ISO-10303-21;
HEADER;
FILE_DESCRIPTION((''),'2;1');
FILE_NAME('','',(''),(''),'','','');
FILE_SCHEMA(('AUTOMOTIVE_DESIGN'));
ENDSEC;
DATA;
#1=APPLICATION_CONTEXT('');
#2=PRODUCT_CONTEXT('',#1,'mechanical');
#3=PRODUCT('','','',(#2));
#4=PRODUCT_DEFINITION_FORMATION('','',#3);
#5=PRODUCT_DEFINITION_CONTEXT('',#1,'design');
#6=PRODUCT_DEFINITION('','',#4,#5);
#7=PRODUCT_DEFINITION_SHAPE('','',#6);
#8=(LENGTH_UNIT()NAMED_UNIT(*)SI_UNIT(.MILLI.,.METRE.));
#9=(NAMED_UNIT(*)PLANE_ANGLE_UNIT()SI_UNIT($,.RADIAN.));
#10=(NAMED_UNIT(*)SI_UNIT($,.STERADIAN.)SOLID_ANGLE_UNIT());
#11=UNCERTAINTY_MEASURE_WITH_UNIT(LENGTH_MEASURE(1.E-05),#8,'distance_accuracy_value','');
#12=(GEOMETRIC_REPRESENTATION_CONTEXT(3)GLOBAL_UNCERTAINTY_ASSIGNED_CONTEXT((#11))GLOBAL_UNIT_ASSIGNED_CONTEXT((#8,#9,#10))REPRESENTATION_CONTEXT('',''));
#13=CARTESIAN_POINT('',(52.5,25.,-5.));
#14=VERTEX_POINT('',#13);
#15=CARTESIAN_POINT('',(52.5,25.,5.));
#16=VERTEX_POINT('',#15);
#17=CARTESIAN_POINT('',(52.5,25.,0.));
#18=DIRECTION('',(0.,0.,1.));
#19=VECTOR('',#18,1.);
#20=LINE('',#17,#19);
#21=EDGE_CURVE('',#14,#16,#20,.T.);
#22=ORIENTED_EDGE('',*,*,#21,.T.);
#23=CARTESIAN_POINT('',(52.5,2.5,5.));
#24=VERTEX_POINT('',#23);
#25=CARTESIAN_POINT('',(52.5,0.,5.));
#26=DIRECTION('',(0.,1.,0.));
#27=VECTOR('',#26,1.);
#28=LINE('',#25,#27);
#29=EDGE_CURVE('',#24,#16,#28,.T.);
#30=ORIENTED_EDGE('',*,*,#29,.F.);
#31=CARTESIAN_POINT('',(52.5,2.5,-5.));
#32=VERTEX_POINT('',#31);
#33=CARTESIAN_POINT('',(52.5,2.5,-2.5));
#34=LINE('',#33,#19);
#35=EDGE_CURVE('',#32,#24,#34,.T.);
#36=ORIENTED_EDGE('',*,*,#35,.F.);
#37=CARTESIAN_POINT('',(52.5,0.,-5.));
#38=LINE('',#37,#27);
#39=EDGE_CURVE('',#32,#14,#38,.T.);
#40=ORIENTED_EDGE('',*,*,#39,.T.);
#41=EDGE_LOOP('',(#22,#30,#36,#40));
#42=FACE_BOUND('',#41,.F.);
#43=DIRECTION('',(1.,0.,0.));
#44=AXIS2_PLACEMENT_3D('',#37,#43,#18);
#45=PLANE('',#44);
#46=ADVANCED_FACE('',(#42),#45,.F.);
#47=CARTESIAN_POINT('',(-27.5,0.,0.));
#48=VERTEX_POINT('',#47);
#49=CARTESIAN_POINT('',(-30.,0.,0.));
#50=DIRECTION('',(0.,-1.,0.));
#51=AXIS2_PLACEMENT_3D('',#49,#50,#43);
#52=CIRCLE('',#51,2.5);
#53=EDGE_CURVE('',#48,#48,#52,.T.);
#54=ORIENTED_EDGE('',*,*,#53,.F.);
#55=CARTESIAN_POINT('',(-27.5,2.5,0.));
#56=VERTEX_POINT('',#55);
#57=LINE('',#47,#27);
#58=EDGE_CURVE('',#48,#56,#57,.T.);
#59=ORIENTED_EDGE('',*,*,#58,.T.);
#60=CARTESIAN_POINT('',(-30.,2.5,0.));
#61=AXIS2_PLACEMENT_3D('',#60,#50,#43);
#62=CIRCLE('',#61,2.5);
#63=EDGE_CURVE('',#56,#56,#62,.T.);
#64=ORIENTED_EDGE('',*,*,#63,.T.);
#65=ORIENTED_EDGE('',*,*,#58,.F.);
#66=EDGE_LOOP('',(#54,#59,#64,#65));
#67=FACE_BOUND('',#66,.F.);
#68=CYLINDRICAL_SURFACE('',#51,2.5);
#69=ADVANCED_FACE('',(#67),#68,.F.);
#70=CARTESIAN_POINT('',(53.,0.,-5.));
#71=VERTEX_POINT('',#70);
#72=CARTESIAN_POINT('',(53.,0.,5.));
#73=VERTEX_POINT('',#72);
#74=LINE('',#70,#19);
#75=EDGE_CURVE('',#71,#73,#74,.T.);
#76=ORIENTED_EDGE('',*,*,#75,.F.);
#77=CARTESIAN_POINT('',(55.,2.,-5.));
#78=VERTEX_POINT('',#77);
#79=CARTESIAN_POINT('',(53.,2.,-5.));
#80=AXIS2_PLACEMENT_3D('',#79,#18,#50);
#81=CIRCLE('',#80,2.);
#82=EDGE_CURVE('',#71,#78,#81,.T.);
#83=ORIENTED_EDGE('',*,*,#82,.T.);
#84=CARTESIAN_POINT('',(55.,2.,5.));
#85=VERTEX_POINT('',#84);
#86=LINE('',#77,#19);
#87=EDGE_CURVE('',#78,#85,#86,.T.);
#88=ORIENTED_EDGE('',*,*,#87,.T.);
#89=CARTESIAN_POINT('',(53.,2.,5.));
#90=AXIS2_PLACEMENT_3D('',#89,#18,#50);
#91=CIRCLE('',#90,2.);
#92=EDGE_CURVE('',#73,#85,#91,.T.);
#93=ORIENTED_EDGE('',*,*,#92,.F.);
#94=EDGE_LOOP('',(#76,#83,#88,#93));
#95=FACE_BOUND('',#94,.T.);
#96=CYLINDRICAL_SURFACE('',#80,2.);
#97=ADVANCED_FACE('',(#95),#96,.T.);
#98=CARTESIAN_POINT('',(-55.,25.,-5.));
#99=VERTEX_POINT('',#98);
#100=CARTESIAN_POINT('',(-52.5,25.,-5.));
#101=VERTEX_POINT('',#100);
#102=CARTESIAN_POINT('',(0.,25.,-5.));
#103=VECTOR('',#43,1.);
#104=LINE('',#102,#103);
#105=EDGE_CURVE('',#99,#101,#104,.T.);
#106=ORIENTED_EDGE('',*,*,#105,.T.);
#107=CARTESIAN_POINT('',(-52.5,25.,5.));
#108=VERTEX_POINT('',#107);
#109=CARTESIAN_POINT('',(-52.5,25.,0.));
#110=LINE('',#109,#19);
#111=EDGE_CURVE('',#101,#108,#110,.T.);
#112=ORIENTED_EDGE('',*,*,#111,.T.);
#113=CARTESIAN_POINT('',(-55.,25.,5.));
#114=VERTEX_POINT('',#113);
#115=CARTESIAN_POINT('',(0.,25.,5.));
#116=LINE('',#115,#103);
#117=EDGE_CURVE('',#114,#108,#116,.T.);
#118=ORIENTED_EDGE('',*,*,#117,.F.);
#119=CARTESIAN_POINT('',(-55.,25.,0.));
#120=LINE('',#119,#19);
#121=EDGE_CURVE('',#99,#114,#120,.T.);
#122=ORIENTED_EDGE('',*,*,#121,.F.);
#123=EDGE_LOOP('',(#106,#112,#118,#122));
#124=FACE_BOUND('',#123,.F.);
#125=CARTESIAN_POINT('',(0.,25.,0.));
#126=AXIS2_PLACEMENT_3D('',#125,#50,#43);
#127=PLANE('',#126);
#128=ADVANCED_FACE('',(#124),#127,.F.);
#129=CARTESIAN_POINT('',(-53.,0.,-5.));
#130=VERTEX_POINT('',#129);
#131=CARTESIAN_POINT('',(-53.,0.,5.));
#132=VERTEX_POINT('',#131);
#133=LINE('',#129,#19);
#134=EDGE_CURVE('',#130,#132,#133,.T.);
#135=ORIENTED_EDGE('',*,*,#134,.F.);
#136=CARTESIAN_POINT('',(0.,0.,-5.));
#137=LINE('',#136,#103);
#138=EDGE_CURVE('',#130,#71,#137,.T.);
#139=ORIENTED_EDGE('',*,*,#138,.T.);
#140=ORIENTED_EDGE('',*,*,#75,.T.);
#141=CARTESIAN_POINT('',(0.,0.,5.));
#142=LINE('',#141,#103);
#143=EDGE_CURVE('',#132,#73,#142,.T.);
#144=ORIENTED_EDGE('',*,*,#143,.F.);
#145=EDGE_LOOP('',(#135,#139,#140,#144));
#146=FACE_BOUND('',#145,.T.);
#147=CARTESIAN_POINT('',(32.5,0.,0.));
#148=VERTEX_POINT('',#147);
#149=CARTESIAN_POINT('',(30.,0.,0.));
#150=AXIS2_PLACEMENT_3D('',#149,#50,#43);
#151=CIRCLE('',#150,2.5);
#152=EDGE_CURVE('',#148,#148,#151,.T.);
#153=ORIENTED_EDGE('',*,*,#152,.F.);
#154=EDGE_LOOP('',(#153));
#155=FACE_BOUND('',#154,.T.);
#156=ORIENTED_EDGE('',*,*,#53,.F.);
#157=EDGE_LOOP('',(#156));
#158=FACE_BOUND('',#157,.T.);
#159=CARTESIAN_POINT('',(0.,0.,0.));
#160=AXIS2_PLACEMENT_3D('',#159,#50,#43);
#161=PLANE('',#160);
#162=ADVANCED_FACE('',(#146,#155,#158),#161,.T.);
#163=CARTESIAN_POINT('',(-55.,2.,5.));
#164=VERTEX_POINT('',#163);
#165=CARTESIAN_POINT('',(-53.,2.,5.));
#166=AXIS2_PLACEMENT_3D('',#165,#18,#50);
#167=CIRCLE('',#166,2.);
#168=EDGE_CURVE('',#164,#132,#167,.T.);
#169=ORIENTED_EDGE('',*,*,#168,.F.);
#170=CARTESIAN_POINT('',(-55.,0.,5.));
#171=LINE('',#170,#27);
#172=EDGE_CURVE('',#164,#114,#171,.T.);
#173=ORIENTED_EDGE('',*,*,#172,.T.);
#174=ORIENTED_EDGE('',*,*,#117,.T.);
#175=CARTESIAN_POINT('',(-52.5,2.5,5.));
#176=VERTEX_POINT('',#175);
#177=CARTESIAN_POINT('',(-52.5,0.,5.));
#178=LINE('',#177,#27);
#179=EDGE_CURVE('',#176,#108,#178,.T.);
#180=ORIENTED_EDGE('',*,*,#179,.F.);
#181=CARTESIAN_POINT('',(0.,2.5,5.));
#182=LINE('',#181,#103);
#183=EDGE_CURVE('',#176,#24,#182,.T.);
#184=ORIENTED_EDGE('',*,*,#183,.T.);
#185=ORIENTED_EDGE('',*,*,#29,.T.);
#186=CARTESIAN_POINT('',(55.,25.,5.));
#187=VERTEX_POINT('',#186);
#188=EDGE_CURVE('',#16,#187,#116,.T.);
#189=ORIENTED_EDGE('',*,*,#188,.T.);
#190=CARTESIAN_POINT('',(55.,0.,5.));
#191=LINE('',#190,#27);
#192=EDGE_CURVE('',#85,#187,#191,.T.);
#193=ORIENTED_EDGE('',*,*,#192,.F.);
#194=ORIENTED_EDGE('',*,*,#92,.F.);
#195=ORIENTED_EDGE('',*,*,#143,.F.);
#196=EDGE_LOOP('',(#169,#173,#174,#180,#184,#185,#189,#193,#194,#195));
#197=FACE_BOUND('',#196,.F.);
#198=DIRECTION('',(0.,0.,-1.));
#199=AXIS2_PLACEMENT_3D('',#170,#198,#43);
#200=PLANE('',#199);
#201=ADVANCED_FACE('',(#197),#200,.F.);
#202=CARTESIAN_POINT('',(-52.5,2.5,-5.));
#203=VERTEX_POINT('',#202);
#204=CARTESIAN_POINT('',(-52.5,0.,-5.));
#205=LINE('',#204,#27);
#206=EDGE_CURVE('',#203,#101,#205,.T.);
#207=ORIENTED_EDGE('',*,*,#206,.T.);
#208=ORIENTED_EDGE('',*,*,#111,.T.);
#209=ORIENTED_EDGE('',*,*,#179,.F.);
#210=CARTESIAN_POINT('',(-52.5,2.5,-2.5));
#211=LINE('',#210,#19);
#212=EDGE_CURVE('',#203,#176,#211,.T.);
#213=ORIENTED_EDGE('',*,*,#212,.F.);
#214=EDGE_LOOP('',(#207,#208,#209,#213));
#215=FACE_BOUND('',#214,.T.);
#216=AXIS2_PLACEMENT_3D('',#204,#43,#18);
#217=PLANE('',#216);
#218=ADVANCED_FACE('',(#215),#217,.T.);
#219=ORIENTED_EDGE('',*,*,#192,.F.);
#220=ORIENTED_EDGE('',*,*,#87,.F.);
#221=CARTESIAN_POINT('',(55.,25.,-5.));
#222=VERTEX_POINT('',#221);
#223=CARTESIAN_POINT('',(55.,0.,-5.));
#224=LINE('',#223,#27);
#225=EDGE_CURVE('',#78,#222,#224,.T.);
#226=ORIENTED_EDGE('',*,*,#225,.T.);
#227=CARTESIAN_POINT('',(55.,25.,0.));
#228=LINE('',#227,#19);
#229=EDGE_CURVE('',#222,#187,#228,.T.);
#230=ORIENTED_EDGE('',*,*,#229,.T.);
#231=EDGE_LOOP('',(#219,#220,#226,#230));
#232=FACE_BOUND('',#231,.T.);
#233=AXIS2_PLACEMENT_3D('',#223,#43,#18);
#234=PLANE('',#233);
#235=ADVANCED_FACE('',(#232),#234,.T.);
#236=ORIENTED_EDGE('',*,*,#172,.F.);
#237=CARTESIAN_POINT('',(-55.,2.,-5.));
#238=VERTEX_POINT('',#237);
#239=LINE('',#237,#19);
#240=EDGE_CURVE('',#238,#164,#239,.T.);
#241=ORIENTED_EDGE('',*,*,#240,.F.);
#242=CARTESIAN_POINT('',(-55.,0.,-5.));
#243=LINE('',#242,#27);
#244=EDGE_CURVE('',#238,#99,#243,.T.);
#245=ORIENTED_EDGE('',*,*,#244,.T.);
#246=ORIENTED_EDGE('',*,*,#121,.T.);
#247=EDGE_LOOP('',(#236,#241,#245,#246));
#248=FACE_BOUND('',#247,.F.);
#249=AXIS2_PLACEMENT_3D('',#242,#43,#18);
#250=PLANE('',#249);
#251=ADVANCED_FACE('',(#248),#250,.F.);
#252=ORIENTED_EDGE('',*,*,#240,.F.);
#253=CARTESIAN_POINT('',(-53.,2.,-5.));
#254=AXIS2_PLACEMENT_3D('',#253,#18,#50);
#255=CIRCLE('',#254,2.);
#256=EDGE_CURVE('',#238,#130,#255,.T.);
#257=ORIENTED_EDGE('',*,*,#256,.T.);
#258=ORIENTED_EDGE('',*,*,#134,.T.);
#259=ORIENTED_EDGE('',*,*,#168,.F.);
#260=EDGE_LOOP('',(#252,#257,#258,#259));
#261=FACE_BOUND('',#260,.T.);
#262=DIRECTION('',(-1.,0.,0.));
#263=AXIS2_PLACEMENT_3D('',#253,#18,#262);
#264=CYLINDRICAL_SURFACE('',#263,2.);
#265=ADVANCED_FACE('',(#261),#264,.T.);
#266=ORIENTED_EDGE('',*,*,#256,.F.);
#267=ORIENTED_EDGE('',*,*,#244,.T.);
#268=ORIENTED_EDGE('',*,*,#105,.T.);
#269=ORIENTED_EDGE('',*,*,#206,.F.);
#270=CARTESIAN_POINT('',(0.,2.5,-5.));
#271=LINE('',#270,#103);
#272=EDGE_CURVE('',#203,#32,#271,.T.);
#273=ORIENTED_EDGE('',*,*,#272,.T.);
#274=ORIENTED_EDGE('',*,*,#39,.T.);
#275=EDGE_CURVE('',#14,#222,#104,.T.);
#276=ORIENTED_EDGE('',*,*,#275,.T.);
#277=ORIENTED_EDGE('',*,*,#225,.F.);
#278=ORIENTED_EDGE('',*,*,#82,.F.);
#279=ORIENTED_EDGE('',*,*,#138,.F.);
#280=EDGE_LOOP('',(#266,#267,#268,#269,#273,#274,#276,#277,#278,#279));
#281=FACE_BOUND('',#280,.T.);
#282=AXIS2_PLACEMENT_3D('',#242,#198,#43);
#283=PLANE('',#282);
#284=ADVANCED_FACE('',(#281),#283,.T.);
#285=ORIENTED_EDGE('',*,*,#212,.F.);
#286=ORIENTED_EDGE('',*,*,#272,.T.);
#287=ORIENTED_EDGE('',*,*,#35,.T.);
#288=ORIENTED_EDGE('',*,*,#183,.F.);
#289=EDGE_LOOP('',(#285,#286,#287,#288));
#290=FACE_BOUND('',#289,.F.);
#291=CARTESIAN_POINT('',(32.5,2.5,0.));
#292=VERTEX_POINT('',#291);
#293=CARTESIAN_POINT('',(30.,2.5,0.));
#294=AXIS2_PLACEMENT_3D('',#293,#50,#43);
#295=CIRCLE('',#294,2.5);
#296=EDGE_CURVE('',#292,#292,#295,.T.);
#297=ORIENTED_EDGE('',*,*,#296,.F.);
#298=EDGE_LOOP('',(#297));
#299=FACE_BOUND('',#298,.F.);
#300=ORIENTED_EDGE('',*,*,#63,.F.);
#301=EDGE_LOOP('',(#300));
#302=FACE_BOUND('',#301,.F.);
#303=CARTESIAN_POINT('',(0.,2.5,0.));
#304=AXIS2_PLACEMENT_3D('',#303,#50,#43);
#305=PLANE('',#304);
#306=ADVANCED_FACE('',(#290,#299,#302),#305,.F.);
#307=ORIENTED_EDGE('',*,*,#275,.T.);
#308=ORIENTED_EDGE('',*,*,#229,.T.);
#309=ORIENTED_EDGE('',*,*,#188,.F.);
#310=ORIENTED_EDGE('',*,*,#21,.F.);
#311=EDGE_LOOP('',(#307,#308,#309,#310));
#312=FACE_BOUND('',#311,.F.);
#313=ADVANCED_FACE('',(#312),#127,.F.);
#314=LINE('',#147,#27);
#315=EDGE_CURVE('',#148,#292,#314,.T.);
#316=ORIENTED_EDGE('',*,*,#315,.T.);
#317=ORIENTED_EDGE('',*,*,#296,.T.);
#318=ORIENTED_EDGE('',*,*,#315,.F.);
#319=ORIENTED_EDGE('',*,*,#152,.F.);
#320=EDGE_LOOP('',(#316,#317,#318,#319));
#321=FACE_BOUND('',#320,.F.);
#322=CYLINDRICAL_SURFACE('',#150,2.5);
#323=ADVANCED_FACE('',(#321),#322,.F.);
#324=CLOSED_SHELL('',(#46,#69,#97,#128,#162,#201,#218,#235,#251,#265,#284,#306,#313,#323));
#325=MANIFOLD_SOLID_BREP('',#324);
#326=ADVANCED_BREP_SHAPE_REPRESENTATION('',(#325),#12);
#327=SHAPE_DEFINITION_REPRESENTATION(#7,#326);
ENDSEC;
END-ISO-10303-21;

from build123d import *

# Parameters (mm, degrees)
F0_W     = 110
F0_H     = 10
F0_R     = 2.5
F1_DEPTH = 25
F2_T     = -2.5
F3_R     = 2


# Not quite as in the source:
# - a feature names something its author has since deleted; it is built from what else it names


with BuildPart() as f1:
    # F0 (on Front) → F1 (new body)
    with BuildSketch(Plane.XZ):
        Rectangle(F0_W, F0_H)
        with Locations((-30, 0)):
            Circle(F0_R, mode=Mode.SUBTRACT)
        with Locations((30, 0)):
            Circle(F0_R, mode=Mode.SUBTRACT)
    extrude(amount=-F1_DEPTH)

    # F2
    f2_openings = [f1.faces().sort_by_distance(p)[0] for p in [
        (0, 12.5, -5),
        (0, 25, 0),
        (0, 12.5, 5),
        (-32.5, 12.5, 0),
        (27.5, 12.5, 0),
    ]]
    offset(amount=F2_T, openings=f2_openings)

    # F3
    f3_edges = [f1.edges().sort_by_distance(p)[0] for p in [
        (-55, 0, 0),
        (55, 0, 0),
    ]]
    fillet(f3_edges, radius=F3_R)


solid = f1.part
